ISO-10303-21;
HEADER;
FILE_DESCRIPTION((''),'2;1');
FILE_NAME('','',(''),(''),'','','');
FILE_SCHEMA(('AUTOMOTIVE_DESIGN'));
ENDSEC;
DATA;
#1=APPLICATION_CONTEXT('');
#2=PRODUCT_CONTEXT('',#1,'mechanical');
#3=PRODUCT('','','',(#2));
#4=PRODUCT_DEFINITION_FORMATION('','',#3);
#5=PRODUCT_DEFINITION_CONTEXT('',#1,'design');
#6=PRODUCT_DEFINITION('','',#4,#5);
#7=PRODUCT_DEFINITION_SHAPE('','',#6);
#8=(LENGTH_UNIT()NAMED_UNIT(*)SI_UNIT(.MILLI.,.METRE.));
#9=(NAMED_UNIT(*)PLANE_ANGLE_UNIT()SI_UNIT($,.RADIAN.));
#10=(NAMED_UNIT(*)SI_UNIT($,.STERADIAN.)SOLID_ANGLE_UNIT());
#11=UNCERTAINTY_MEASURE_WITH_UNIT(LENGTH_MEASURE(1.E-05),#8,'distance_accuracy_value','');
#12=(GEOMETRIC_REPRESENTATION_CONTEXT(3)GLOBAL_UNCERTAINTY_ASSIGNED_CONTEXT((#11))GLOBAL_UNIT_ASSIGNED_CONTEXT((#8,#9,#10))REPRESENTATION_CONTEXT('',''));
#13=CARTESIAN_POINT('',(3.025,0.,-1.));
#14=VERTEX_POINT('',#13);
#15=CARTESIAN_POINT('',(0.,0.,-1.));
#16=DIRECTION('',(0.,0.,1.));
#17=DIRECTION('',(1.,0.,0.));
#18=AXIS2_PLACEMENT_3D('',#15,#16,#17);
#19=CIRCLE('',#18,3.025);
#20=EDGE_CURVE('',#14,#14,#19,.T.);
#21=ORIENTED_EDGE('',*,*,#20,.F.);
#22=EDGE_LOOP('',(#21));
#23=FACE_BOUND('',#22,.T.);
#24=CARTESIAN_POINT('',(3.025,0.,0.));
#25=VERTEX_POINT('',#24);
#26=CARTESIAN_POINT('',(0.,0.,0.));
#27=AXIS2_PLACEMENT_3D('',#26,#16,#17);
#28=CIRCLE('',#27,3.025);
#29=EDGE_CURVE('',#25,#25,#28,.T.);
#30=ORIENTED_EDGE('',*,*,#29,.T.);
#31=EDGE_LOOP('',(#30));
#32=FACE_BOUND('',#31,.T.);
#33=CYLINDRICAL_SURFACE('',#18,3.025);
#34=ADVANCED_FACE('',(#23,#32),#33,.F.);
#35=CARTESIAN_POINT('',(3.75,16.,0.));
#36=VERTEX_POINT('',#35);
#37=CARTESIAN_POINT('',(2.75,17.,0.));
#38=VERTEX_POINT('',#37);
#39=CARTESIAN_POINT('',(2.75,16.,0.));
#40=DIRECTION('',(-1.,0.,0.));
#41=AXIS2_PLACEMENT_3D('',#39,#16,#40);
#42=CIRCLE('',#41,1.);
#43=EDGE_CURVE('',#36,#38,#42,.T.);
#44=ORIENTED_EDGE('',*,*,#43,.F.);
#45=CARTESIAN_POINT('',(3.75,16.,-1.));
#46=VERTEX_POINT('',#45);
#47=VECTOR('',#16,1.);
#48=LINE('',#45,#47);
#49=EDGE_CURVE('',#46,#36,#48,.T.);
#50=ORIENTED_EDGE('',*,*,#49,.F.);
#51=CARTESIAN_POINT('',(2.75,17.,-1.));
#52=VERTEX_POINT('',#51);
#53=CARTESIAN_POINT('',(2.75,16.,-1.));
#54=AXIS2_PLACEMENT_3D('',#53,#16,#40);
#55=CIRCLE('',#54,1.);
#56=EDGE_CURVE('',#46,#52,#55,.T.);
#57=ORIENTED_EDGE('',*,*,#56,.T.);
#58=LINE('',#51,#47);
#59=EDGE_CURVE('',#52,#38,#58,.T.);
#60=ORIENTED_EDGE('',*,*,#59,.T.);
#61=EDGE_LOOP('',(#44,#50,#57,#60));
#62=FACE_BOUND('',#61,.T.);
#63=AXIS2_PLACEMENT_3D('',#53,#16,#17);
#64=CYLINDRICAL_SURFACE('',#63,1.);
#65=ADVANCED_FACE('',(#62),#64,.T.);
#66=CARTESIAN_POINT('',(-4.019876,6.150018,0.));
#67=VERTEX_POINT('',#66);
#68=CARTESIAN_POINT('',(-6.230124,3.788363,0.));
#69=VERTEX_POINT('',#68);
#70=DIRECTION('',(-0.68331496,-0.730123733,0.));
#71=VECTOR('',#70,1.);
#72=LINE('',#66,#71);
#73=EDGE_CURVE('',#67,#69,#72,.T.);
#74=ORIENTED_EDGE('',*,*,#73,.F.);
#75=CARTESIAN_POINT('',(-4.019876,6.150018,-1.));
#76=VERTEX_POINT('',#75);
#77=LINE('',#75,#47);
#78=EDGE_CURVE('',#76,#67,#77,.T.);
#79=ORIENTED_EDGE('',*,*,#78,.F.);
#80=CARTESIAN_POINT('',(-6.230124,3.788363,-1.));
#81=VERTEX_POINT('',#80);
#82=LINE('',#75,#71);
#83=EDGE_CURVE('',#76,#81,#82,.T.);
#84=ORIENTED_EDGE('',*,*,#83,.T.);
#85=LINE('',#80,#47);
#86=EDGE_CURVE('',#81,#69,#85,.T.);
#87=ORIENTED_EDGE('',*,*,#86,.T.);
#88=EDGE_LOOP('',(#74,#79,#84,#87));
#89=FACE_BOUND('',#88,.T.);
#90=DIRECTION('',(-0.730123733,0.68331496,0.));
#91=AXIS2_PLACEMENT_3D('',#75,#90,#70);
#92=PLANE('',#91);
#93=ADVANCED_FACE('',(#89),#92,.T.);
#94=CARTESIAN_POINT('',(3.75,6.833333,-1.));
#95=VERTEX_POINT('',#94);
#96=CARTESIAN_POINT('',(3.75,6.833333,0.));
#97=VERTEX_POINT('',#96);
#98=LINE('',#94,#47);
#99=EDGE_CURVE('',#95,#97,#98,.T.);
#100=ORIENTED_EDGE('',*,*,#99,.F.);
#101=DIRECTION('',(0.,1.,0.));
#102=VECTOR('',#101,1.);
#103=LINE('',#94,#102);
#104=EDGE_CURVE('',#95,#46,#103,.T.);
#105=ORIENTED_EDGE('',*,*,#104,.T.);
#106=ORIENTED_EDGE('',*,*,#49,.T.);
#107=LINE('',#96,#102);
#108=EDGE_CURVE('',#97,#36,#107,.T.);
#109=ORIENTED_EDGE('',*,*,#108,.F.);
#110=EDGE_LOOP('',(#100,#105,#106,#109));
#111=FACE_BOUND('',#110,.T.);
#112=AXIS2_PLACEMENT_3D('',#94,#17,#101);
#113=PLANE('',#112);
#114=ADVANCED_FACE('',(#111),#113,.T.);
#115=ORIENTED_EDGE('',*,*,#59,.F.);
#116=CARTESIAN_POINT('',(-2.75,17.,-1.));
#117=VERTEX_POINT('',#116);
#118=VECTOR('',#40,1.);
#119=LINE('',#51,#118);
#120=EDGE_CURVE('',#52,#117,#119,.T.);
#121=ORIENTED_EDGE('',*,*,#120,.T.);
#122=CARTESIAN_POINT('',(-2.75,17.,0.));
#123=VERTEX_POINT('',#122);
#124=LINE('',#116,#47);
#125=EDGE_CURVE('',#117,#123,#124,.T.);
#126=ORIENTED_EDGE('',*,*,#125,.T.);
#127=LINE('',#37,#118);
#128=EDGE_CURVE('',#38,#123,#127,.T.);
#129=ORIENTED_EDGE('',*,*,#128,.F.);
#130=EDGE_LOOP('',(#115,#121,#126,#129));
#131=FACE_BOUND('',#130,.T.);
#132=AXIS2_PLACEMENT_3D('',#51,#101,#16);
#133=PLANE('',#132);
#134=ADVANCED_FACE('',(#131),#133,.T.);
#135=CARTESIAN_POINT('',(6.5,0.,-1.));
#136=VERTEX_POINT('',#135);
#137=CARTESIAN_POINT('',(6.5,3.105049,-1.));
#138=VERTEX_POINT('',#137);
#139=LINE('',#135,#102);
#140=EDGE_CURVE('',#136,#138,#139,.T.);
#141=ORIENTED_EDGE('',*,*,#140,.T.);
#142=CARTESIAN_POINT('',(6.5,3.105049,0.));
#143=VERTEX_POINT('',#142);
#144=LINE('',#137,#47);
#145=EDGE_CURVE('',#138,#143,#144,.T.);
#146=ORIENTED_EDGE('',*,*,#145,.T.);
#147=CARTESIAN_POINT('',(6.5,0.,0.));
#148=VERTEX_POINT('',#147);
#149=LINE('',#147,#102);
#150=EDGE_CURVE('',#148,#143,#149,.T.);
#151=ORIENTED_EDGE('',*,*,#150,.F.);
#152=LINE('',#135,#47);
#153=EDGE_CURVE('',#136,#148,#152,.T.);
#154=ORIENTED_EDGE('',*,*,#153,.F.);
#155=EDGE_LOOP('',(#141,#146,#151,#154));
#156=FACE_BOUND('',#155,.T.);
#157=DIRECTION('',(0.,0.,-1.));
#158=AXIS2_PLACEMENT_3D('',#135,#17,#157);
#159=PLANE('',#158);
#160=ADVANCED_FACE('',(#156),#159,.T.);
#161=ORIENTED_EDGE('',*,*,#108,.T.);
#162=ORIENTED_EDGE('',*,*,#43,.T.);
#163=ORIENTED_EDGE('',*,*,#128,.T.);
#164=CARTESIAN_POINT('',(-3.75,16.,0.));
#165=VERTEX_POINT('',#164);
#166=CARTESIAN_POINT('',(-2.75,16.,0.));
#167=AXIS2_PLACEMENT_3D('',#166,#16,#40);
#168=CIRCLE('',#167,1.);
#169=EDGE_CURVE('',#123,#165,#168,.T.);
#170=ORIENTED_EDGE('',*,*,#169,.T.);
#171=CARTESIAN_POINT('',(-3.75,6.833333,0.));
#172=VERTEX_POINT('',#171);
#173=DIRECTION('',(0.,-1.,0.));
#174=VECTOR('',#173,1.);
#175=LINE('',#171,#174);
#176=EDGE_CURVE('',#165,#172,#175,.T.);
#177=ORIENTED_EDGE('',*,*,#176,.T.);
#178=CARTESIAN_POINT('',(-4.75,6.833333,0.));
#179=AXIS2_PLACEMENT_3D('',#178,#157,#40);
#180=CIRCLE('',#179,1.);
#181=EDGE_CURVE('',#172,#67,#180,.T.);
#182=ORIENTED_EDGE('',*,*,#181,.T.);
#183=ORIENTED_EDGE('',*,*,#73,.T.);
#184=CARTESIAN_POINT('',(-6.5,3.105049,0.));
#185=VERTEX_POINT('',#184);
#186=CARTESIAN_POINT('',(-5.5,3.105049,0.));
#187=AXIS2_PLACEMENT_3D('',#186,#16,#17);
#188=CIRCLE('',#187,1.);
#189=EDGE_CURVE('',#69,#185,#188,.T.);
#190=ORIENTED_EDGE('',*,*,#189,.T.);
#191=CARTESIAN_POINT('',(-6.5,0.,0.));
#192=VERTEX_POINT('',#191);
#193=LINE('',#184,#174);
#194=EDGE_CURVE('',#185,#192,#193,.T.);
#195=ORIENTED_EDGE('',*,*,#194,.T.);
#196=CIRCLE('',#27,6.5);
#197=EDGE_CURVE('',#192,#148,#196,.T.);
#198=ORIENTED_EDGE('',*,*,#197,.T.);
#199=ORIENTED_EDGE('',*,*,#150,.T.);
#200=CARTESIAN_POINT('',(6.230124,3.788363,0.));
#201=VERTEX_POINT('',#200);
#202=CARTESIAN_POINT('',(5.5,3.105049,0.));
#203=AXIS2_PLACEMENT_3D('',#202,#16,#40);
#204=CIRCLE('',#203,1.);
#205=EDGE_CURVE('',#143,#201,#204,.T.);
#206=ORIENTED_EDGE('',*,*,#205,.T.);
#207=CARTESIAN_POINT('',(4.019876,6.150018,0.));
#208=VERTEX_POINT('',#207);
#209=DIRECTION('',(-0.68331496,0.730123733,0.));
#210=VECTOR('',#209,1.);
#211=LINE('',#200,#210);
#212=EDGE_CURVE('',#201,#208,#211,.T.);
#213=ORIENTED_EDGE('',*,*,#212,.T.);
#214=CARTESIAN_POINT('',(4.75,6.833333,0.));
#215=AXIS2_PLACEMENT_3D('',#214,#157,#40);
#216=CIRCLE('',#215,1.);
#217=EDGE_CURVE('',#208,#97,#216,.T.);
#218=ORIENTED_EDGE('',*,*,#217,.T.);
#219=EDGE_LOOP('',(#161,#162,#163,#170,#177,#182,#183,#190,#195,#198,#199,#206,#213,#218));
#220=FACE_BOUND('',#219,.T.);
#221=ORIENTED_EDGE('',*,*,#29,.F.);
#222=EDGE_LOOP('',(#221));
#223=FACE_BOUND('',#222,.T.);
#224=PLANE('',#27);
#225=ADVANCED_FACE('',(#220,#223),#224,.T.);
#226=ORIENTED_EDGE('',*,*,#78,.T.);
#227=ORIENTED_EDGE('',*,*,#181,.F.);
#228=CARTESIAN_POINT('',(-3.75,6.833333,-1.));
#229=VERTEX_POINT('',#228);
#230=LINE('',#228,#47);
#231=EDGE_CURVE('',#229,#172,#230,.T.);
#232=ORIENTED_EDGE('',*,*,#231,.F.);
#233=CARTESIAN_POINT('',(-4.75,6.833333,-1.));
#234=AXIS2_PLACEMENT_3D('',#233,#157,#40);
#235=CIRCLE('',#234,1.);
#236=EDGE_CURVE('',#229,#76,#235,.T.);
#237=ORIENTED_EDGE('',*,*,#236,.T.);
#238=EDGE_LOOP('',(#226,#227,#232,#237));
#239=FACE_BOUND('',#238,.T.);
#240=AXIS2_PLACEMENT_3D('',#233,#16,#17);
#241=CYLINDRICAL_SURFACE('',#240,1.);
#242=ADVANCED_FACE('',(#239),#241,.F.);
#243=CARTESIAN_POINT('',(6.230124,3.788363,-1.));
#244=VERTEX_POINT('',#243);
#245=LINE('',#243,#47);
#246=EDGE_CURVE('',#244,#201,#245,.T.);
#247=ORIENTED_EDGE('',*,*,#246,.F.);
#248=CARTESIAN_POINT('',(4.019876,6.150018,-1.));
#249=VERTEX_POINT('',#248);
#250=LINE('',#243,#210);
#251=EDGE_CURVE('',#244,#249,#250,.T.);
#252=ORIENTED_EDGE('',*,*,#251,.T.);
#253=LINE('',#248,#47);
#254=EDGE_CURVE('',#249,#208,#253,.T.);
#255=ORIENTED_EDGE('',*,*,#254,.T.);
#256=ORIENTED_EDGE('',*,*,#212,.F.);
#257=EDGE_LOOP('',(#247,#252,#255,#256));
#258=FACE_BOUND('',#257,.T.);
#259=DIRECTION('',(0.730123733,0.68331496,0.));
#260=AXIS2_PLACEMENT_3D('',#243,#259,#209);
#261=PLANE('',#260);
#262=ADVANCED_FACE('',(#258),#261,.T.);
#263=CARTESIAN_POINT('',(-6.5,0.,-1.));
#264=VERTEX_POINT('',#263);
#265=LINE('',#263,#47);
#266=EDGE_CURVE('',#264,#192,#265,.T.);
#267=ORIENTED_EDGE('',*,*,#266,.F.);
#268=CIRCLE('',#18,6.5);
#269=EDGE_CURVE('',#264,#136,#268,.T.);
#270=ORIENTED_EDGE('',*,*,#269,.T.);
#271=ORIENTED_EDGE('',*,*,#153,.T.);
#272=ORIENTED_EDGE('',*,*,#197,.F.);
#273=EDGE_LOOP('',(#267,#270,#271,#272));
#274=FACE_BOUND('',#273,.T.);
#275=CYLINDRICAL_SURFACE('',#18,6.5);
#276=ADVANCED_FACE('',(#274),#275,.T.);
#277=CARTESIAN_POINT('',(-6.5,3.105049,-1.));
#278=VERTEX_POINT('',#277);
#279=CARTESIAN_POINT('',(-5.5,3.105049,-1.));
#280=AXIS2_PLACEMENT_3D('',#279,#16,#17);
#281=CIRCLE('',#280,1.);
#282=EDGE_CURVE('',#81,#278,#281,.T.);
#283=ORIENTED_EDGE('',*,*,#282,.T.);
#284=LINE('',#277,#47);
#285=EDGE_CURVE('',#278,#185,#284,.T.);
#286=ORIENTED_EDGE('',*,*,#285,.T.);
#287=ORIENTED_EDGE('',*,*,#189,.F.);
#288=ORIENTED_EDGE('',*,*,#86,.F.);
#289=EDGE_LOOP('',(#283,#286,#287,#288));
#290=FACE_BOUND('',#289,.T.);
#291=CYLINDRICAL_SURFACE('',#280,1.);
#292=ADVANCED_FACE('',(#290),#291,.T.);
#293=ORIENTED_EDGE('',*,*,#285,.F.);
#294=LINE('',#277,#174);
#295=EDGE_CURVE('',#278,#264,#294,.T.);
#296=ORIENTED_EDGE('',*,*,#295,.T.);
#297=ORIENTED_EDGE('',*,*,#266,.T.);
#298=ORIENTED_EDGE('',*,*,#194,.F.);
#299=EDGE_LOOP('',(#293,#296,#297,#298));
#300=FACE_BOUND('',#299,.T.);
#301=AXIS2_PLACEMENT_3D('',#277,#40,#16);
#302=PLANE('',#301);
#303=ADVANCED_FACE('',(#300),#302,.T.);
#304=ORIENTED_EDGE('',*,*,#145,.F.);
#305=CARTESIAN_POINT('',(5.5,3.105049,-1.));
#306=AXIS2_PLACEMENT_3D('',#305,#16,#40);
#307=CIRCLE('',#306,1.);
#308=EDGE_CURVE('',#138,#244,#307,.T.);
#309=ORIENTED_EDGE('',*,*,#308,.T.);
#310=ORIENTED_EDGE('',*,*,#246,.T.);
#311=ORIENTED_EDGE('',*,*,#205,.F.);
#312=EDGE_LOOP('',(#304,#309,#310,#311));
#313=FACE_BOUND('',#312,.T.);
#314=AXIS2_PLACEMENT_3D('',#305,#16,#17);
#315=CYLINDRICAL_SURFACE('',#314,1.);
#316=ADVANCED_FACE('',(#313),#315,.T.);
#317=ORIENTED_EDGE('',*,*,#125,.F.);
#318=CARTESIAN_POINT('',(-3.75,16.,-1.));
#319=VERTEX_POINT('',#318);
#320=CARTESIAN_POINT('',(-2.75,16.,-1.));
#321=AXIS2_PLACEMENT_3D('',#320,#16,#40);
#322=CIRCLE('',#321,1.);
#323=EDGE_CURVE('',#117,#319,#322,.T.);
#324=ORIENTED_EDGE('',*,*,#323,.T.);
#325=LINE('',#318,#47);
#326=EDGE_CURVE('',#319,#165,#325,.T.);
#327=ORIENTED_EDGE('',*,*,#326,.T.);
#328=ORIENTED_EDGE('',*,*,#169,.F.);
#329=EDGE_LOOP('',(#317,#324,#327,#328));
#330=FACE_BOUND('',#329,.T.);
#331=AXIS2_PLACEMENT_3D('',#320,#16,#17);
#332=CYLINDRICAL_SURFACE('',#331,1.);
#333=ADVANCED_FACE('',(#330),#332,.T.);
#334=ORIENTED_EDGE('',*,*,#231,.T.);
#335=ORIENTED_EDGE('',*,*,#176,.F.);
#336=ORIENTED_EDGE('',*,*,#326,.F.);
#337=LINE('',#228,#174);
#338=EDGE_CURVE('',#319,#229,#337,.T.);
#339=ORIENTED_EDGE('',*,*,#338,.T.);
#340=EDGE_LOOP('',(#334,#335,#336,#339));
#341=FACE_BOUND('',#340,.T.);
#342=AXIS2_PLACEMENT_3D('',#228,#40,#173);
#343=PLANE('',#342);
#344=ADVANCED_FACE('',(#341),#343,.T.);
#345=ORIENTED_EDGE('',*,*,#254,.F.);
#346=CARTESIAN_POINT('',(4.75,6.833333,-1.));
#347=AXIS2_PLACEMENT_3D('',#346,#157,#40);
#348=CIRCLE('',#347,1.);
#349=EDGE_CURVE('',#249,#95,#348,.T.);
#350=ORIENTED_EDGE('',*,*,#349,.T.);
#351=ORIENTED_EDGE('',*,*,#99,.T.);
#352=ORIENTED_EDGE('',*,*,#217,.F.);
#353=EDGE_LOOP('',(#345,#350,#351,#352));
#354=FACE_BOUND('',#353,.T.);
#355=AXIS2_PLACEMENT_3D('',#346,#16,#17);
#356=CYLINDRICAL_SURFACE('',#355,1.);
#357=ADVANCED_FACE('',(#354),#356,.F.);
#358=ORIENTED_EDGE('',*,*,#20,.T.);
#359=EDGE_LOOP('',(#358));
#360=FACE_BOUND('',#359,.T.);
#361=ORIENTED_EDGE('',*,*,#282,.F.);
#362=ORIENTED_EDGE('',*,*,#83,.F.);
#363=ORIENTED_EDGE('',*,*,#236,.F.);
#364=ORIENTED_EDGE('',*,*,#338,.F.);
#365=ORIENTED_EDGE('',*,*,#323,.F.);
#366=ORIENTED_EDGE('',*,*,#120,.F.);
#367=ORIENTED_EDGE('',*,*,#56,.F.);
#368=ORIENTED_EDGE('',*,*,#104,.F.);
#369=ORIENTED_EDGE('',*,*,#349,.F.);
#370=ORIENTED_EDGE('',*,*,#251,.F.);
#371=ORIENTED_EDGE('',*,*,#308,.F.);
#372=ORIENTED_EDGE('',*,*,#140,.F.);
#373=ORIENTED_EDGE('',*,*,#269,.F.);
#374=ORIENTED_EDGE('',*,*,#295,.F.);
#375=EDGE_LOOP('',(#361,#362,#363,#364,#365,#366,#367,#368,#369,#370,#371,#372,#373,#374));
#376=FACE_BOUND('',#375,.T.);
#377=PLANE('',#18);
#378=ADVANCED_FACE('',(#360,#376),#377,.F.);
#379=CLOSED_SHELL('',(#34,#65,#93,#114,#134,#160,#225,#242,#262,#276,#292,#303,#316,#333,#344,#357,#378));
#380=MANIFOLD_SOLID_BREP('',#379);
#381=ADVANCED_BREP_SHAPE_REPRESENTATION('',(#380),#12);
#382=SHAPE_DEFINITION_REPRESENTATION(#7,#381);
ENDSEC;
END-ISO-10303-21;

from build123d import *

# Parameters (mm, degrees)
SKETCH1_R          = 3.025
BASE_FLANGE1_DEPTH = 1


# Sheet-metal steps are written as plain solids
with BuildPart() as part:
    # Sketch1 → Base-Flange1 (new body)
    with BuildSketch(Plane.XY):
        with BuildLine():
            Line((6.5, 0), (6.5, 3.105048502))
            ThreePointArc((6.5, 3.105048502), (6.430087021, 3.472387764), (6.230123733, 3.788363462))
            Line((6.230123733, 3.788363462), (4.019876267, 6.150018373))
            ThreePointArc((4.019876267, 6.150018373), (3.819912979, 6.465994071), (3.75, 6.833333333))
            Line((3.75, 6.833333333), (3.75, 16))
            ThreePointArc((3.75, 16), (3.457106781, 16.707106781), (2.75, 17))
            Line((2.75, 17), (-2.75, 17))
            ThreePointArc((-2.75, 17), (-3.457106781, 16.707106781), (-3.75, 16))
            Line((-3.75, 16), (-3.75, 6.833333333))
            ThreePointArc((-3.75, 6.833333333), (-3.819912979, 6.465994071), (-4.019876267, 6.150018373))
            Line((-4.019876267, 6.150018373), (-6.230123733, 3.788363462))
            ThreePointArc((-6.230123733, 3.788363462), (-6.430087021, 3.472387764), (-6.5, 3.105048502))
            Line((-6.5, 3.105048502), (-6.5, 0))
            ThreePointArc((-6.5, 0), (0, -6.5), (6.5, 0))
        make_face()
        Circle(SKETCH1_R, mode=Mode.SUBTRACT)
    extrude(amount=-BASE_FLANGE1_DEPTH)


solid = part.part
